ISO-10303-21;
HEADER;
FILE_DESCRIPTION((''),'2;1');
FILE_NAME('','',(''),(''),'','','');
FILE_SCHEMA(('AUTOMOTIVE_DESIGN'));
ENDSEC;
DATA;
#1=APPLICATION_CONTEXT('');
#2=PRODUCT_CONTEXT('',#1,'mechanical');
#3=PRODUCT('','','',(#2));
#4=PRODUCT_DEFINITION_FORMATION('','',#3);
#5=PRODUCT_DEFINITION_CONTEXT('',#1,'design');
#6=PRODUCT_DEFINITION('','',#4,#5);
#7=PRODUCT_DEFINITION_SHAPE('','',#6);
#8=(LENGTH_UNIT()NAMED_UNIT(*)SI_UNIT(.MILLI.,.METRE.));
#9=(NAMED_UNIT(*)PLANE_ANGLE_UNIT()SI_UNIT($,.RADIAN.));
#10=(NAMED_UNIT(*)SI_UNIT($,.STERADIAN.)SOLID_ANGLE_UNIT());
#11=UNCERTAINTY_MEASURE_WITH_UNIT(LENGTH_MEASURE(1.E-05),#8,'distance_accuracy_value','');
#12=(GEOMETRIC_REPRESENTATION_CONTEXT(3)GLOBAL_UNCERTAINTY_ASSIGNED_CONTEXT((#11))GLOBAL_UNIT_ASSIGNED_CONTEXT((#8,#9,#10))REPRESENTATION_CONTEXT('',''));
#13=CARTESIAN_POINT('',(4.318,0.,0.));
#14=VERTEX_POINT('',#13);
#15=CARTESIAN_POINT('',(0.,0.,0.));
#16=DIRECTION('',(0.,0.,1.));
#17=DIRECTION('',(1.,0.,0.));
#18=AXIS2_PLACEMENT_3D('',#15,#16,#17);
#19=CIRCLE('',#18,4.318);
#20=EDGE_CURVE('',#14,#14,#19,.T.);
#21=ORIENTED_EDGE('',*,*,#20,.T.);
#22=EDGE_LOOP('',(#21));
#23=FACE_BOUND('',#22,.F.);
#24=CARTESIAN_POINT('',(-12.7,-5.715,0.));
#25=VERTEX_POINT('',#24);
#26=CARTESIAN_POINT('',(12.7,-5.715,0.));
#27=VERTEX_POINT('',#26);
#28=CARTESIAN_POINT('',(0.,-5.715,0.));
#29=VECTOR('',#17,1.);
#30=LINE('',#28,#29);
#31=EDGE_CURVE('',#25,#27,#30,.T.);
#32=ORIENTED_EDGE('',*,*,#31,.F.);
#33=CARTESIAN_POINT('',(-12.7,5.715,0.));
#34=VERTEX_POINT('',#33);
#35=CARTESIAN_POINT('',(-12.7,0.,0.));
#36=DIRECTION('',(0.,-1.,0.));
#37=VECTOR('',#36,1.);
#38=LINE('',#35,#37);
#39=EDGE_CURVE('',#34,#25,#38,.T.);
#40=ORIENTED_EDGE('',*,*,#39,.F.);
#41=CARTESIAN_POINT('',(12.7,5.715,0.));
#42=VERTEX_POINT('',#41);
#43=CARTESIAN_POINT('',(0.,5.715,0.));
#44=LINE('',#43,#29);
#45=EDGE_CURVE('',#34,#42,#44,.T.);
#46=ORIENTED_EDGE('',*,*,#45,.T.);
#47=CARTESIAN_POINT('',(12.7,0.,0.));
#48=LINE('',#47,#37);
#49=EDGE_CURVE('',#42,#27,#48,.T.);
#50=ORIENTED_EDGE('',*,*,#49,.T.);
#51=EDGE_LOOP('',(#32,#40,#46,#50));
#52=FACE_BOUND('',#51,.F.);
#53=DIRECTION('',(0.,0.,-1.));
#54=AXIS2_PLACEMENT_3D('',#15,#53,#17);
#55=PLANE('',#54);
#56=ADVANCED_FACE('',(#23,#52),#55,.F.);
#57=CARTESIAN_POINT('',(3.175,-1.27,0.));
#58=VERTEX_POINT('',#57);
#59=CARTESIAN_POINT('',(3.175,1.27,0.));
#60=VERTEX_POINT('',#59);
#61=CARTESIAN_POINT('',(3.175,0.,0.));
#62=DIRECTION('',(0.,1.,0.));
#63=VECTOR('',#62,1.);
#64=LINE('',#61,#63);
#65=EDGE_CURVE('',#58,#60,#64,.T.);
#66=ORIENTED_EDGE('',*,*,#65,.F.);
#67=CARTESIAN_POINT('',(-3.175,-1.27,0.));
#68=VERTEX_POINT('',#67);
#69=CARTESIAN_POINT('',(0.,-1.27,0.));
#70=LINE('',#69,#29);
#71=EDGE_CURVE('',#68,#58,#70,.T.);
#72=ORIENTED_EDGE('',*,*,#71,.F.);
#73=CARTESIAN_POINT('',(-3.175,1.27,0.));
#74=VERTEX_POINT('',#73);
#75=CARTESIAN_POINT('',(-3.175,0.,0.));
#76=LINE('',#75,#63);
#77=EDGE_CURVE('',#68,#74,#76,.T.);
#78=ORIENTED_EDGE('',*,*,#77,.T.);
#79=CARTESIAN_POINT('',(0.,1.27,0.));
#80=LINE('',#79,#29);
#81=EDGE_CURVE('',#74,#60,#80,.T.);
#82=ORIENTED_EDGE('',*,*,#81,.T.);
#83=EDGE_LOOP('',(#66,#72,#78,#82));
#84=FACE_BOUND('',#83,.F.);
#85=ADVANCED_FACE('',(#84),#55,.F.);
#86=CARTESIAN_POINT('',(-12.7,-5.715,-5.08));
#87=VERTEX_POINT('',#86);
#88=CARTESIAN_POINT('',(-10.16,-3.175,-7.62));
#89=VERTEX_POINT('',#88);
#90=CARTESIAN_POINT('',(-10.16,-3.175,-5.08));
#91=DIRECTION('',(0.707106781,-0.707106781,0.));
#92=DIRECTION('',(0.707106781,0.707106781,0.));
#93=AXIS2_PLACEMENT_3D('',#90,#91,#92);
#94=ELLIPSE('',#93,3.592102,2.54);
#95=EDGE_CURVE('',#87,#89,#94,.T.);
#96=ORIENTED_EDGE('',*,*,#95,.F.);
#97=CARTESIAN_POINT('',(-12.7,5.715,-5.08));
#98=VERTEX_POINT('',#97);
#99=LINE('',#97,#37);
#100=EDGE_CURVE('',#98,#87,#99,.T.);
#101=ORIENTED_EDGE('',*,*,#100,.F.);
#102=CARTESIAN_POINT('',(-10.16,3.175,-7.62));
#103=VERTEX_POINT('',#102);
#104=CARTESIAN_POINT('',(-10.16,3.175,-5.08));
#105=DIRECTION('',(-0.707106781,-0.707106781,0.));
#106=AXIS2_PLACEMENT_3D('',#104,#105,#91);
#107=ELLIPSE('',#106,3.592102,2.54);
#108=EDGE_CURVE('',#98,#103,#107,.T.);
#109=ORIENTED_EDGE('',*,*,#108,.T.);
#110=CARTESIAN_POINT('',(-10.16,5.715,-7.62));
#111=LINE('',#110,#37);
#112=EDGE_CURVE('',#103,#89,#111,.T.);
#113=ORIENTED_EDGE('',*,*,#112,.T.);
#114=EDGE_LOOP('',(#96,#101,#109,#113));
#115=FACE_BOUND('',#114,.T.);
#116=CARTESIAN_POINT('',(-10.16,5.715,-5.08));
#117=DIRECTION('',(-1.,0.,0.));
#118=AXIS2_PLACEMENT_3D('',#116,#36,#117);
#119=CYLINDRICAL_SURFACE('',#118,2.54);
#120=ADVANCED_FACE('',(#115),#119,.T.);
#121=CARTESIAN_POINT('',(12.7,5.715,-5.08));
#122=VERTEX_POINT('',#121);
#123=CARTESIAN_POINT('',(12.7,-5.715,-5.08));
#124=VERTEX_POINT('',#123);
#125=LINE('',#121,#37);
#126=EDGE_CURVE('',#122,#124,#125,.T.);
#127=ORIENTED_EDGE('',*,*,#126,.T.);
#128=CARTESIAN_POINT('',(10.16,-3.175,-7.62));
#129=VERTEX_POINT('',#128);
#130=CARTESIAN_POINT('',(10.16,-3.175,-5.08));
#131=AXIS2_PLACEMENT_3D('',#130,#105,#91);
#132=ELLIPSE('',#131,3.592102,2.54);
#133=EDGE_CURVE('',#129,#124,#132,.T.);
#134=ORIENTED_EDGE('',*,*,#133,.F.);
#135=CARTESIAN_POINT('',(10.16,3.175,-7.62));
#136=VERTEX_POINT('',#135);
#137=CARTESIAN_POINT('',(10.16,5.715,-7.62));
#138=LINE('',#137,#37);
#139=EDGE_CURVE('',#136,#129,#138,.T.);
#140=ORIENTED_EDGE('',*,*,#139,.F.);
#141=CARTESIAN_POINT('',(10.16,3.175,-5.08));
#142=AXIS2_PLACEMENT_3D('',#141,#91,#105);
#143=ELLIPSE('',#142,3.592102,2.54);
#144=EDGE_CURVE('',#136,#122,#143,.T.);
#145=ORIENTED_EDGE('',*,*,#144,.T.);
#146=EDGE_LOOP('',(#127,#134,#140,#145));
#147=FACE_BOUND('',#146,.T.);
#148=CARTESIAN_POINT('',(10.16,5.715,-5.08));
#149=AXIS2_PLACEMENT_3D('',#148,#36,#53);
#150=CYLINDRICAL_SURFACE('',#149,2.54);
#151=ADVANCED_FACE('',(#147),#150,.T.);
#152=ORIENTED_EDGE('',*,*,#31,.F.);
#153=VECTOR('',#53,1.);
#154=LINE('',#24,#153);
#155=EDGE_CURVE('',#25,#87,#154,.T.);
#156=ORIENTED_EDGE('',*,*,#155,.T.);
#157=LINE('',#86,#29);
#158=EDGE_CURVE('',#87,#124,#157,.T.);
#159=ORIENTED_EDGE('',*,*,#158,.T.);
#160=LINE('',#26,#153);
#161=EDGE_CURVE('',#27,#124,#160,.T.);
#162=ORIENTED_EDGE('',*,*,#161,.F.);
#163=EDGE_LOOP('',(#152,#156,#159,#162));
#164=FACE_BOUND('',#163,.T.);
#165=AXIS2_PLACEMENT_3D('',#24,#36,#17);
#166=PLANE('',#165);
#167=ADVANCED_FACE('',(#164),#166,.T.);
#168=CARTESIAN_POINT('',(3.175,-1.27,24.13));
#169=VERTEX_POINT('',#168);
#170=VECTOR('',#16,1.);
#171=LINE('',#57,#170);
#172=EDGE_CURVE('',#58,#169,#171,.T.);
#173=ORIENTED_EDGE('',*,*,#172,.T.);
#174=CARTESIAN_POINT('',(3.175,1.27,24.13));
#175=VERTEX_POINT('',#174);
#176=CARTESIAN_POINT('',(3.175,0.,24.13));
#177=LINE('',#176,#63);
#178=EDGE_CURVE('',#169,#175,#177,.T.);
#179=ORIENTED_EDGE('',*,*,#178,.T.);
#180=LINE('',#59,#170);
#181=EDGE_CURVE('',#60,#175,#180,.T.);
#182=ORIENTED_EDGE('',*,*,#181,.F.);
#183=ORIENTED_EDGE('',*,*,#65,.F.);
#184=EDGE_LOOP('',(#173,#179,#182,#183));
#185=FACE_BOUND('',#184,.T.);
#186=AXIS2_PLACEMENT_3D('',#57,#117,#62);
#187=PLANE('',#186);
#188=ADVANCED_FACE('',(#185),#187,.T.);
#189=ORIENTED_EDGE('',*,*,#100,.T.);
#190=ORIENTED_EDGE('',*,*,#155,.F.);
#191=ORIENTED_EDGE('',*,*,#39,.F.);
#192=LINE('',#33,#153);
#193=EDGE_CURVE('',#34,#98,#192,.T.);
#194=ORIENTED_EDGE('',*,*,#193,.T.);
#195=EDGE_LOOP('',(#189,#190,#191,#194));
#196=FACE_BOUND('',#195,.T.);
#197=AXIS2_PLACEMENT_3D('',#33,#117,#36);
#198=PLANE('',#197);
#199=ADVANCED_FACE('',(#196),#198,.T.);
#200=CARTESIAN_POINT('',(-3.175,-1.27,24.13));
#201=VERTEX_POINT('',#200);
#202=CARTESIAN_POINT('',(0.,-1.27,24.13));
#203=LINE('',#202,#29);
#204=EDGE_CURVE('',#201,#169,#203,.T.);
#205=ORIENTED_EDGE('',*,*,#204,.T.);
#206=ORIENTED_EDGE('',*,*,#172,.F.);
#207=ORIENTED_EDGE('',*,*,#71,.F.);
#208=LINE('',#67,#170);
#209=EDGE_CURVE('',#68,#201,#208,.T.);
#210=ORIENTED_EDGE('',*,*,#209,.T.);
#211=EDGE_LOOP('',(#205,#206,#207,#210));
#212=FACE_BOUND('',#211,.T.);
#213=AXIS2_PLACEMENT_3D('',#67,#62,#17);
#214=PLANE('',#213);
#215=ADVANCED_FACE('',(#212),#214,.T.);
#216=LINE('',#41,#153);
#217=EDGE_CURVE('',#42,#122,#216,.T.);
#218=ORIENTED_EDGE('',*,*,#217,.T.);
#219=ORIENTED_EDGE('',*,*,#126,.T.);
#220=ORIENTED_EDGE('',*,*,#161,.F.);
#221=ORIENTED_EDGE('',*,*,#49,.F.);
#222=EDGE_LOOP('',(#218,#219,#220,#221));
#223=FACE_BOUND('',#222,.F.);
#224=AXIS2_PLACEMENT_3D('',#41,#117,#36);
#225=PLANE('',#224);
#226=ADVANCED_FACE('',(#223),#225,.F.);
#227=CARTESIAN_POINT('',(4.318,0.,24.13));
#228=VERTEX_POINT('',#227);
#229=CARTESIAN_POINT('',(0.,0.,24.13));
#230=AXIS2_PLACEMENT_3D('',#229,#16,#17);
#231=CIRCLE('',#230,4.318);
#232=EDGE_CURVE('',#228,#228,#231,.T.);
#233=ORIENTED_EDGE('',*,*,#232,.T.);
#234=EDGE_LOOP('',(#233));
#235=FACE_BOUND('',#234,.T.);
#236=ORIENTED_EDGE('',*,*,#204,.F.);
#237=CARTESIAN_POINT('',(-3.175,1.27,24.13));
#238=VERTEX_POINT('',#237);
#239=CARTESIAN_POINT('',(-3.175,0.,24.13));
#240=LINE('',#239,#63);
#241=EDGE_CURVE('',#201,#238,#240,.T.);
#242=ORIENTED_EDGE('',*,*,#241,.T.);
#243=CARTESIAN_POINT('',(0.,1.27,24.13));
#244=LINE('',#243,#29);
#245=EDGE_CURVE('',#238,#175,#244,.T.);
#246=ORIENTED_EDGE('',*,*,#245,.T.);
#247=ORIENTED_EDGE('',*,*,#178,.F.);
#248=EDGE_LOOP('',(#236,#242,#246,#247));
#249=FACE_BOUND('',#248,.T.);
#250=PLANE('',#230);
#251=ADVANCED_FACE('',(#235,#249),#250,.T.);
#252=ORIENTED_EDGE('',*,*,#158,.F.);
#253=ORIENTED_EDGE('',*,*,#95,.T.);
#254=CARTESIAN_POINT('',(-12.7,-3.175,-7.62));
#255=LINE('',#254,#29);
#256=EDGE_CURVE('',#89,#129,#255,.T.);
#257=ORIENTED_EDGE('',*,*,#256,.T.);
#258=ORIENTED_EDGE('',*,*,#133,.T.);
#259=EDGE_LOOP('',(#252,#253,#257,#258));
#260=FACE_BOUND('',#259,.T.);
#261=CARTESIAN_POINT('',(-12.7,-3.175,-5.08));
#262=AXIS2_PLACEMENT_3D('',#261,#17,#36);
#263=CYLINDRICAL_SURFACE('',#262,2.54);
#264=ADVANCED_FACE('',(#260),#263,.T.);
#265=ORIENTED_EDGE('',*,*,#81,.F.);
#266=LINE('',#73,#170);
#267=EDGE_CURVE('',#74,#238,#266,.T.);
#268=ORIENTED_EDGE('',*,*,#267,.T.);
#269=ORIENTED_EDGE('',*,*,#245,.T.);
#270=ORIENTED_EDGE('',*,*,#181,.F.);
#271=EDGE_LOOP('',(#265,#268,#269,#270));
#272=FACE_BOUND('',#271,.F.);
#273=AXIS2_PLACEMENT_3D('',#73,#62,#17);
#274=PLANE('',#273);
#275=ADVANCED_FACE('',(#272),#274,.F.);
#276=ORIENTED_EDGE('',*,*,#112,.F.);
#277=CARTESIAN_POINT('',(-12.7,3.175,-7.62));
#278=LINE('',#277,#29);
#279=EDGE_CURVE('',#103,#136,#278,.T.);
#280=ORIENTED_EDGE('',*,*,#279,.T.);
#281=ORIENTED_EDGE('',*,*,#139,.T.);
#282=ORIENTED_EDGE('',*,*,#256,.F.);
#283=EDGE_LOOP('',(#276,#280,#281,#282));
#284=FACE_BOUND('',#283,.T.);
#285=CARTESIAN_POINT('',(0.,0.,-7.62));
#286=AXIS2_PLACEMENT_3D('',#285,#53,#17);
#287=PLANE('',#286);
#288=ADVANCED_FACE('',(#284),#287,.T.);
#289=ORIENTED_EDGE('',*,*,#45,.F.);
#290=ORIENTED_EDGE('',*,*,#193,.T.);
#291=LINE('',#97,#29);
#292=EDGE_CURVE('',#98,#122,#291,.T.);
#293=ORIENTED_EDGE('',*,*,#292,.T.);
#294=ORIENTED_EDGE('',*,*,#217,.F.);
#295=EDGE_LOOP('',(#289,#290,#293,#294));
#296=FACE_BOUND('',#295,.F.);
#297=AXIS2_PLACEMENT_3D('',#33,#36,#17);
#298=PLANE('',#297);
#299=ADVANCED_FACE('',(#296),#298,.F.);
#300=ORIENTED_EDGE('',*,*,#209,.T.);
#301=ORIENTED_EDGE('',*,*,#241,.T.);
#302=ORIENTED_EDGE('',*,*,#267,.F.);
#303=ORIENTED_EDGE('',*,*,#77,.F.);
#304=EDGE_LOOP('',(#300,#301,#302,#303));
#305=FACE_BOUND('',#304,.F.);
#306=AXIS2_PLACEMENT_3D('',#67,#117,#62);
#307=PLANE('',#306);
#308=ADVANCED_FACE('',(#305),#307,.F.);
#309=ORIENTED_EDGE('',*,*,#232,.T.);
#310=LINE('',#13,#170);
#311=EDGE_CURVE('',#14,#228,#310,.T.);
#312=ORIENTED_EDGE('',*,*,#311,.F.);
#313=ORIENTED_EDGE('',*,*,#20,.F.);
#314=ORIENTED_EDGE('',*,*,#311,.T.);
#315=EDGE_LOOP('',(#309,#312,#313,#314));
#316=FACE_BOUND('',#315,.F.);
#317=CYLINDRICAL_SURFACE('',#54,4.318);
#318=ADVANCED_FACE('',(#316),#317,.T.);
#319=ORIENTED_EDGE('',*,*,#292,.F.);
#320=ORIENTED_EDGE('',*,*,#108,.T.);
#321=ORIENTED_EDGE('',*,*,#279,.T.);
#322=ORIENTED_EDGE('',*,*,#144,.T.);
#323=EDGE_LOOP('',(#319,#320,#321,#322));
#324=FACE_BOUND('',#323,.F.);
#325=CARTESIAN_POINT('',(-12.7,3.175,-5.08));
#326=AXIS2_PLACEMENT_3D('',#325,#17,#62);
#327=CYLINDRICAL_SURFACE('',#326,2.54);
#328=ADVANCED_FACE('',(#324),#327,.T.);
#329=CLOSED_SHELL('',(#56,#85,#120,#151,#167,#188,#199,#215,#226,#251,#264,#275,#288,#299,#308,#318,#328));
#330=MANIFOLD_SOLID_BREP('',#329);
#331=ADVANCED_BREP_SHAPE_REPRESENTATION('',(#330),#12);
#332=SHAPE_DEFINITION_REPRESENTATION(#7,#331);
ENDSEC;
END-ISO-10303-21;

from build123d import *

# Parameters (mm, degrees)
F0_R     = 4.318
F0_W     = 6.35
F0_H     = 2.54
F1_DEPTH = 24.13
F2_W     = 25.4
F2_H     = 11.43
F2_R     = 4.318
F2_W_2   = 6.35
F2_H_2   = 2.54
F3_DEPTH = 7.62
F4_R     = 2.54


with BuildPart() as f1:
    # F0 (on Top) → F1 (new body)
    with BuildSketch(Plane.XY):
        Circle(F0_R)
        Rectangle(F0_W, F0_H, mode=Mode.SUBTRACT)
    extrude(amount=F1_DEPTH)

    # F2 (on face) → F3 (join)
    with BuildSketch(Plane(origin=(0, 0, 0), x_dir=(1, 0, 0), z_dir=(0, 0, -1))):
        Rectangle(F2_W, F2_H)
        Circle(F2_R, mode=Mode.SUBTRACT)
        Circle(F2_R)
        Rectangle(F2_W_2, F2_H_2, mode=Mode.SUBTRACT)
        Rectangle(F2_W_2, F2_H_2)
    extrude(amount=F3_DEPTH)

    # F4
    f4_edges = [f1.edges().sort_by_distance(p)[0] for p in [
        (12.7, 0, -7.62),
        (0, -5.715, -7.62),
        (-12.7, 0, -7.62),
        (0, 5.715, -7.62),
    ]]
    fillet(f4_edges, radius=F4_R)


solid = f1.part
